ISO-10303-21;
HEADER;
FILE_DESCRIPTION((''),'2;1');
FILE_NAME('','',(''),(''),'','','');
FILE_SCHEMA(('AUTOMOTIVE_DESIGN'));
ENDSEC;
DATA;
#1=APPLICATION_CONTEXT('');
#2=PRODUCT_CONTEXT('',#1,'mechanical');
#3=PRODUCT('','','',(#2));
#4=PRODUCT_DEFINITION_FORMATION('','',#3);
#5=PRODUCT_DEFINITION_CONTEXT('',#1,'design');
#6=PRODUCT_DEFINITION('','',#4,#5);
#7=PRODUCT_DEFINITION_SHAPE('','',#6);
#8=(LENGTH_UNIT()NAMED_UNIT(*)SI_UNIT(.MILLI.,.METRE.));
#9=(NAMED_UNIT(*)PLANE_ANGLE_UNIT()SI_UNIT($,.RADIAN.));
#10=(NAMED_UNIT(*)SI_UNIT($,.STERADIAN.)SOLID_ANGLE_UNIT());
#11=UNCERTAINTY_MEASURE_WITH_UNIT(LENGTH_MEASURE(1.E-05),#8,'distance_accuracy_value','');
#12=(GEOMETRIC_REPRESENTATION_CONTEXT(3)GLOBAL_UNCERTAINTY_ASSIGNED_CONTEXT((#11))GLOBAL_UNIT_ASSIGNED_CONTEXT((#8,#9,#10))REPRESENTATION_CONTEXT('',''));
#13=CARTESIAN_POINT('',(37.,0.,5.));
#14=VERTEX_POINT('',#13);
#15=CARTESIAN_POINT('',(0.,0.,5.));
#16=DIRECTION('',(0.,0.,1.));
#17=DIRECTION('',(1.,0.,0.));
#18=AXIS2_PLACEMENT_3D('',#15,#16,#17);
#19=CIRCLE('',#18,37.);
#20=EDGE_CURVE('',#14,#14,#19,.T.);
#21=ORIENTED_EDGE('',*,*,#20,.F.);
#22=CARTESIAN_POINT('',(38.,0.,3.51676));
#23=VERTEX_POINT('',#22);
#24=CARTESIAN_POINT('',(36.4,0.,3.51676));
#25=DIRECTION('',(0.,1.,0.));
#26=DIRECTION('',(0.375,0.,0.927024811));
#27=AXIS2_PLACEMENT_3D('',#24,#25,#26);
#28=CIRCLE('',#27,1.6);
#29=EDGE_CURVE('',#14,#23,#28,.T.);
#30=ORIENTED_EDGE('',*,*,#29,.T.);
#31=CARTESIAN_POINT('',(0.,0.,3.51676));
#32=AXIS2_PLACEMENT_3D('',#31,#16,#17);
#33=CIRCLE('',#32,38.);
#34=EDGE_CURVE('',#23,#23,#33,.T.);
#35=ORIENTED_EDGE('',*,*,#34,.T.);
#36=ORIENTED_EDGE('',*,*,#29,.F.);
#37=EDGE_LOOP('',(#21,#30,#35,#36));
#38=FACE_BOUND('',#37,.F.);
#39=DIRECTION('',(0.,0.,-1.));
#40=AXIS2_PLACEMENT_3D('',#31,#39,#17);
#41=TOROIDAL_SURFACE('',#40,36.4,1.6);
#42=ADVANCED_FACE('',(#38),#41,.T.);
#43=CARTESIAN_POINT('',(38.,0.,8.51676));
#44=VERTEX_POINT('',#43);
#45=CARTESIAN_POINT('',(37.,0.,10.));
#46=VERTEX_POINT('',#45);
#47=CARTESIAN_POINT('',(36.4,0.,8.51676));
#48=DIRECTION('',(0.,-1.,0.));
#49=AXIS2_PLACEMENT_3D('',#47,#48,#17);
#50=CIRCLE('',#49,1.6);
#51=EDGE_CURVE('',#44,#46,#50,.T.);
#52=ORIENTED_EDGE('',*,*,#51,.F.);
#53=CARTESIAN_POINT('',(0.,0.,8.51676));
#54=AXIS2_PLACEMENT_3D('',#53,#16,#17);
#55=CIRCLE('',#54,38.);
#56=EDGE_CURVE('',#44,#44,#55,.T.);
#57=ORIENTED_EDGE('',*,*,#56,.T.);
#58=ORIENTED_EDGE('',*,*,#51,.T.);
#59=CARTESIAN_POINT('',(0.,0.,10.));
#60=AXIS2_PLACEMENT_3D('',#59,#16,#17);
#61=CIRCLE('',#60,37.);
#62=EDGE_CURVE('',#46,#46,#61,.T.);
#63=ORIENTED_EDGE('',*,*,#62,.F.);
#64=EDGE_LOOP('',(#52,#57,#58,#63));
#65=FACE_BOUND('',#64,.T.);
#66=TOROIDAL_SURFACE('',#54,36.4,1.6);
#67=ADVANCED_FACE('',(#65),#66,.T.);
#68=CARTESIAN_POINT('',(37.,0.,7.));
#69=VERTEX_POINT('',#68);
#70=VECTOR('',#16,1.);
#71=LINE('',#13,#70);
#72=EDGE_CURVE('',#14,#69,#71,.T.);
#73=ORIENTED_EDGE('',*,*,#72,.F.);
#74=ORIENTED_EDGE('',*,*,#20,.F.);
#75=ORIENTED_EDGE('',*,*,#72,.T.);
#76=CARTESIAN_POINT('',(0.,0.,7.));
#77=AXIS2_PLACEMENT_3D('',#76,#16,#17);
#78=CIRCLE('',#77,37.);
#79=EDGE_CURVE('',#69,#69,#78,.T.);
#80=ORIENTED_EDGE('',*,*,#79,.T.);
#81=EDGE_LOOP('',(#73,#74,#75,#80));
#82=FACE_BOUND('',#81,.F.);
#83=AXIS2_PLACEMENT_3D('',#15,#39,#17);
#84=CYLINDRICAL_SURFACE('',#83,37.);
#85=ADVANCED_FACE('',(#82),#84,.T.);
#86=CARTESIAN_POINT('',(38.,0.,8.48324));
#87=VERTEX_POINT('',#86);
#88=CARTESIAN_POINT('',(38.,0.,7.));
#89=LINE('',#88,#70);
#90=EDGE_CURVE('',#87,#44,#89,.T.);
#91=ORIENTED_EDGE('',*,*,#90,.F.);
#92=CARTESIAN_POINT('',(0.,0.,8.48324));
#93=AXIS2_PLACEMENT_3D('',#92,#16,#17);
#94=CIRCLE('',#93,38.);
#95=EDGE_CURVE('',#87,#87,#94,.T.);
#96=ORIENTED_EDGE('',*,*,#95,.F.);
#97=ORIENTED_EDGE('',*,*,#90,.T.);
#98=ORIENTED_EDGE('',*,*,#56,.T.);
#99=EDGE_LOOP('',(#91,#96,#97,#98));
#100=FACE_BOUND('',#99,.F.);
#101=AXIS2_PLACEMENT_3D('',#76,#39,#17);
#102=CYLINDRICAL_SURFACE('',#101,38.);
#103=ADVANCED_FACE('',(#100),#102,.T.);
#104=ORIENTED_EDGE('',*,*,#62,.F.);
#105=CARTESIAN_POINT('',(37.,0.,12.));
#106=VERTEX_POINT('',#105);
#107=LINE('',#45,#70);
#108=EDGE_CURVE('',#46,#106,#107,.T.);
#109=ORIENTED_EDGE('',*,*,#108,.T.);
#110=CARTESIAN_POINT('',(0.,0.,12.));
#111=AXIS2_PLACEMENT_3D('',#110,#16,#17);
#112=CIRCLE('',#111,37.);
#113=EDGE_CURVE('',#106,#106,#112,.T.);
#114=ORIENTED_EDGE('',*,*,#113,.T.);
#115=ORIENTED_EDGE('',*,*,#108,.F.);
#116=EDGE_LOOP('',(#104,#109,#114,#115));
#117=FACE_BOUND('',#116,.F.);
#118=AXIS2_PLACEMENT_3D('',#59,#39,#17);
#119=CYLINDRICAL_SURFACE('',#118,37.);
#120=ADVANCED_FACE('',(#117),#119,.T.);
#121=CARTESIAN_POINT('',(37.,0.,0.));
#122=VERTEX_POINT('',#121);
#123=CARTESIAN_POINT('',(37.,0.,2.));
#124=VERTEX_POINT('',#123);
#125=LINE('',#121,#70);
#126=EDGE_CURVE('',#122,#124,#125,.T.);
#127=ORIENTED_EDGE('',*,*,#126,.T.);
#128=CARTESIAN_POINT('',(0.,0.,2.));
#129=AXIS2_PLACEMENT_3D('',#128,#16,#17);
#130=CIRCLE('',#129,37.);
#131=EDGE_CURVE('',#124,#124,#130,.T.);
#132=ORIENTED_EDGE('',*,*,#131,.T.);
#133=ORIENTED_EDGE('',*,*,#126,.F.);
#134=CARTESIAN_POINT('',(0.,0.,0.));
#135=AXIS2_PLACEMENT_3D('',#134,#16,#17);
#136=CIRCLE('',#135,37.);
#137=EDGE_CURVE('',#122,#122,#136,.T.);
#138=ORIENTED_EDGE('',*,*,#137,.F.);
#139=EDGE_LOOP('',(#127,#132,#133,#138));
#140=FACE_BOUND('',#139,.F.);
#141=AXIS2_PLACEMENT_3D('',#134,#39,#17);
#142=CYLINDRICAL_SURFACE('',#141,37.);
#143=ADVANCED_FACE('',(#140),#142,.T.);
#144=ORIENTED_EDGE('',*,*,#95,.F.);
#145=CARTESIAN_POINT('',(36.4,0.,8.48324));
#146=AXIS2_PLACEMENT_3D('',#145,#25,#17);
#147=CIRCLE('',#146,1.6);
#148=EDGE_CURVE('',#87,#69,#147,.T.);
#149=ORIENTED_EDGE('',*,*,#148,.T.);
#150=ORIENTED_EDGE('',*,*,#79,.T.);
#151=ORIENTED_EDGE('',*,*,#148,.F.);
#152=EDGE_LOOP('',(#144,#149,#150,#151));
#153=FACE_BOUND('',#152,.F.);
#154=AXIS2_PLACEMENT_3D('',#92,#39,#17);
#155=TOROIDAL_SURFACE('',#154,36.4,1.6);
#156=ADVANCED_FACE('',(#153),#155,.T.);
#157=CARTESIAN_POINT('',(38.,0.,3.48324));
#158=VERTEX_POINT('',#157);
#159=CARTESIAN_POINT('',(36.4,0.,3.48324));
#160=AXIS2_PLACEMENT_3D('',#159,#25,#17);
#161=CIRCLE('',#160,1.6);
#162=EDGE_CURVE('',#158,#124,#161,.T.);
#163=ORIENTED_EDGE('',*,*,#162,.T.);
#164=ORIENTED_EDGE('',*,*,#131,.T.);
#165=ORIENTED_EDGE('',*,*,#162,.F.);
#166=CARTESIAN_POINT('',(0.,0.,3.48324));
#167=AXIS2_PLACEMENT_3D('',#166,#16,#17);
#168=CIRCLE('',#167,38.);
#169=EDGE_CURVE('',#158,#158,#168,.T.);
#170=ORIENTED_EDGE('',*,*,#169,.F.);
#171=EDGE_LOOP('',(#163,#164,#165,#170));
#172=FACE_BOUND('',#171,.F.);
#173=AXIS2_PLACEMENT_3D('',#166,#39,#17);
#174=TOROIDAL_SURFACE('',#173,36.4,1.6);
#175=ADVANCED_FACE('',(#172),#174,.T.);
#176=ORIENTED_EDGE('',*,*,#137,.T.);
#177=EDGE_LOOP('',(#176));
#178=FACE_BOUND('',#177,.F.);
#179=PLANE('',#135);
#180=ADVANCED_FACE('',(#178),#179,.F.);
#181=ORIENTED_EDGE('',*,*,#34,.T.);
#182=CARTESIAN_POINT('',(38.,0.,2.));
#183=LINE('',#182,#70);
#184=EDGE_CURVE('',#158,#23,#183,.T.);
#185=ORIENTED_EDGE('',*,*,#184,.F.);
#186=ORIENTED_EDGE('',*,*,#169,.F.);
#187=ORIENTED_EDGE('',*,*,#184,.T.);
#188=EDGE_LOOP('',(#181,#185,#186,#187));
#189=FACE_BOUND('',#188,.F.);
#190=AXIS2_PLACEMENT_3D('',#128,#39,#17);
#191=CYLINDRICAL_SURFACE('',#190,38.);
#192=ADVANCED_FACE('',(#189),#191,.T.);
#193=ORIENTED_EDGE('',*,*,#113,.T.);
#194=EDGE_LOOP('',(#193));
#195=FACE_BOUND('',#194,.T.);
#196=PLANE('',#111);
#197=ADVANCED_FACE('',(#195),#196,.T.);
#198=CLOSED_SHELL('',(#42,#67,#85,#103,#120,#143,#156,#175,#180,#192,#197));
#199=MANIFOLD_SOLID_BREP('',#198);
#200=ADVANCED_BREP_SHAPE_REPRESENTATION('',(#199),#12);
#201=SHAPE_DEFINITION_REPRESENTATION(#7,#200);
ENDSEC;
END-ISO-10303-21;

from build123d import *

# Parameters (mm, degrees)
F0_R     = 37
F1_DEPTH = 2
F2_R     = 38
F3_DEPTH = 3
F4_R     = 37
F5_DEPTH = 2
F6_R     = 38
F7_DEPTH = 3
F8_R     = 37
F9_DEPTH = 2


# Not quite as in the source:
# - a fillet or chamfer that OpenCascade refuses, or shapes differently, is made with other operations: its cross-section is extruded or revolved along the edge and cut away or added


with BuildPart() as f1:
    # F0 (on Top) → F1 (new body)
    with BuildSketch(Plane.XY):
        Circle(F0_R)
    extrude(amount=F1_DEPTH)

    # F2 (on face) → F3 (join)
    with BuildSketch(Plane.XY.offset(2)):
        Circle(F2_R)
    extrude(amount=F3_DEPTH)

    # F4 (on face) → F5 (join)
    with BuildSketch(Plane.XY.offset(5)):
        Circle(F4_R)
    extrude(amount=F5_DEPTH)

    # F6 (on face) → F7 (join)
    with BuildSketch(Plane.XY.offset(7)):
        Circle(F6_R)
    extrude(amount=F7_DEPTH)

    # F8 (on face) → F9 (join)
    with BuildSketch(Plane.XY.offset(10)):
        Circle(F8_R)
    extrude(amount=F9_DEPTH)

    # F10: fillet of radius 1.6 on 4 edges, made by hand

    # F10_s1 → F10_t2 (revolve, cut)
    with BuildSketch(Plane.XZ):
        with BuildLine():
            ThreePointArc((38, 8.4832396974), (37.7266499161, 7.5888125064), (37, 7))
            Line((37, 7), (38, 7))
            Line((38, 7), (38, 8.4832396974))
        make_face()
    revolve(axis=Axis((0, 0, 7), (0, 0, 1)), mode=Mode.SUBTRACT)

    # F10_s3 → F10_t4 (revolve, cut)
    with BuildSketch(Plane.XZ):
        with BuildLine():
            ThreePointArc((38, 3.4832396974), (37.7266499161, 2.5888125064), (37, 2))
            Line((37, 2), (38, 2))
            Line((38, 2), (38, 3.4832396974))
        make_face()
    revolve(axis=Axis((0, 0, 2), (0, 0, 1)), mode=Mode.SUBTRACT)

    # F10_s5 → F10_t6 (revolve, cut)
    with BuildSketch(Plane.XZ):
        with BuildLine():
            ThreePointArc((38, 8.5167603026), (37.7266499161, 9.4111874936), (37, 10))
            Line((37, 10), (38, 10))
            Line((38, 10), (38, 8.5167603026))
        make_face()
    revolve(axis=Axis((0, 0, 10), (0, 0, 1)), mode=Mode.SUBTRACT)

    # F10_s7 → F10_t8 (revolve, cut)
    with BuildSketch(Plane.XZ):
        with BuildLine():
            ThreePointArc((37, 5), (37.7266499161, 4.4111874936), (38, 3.5167603026))
            Line((38, 3.5167603026), (38, 5))
            Line((38, 5), (37, 5))
        make_face()
    revolve(axis=Axis((0, 0, 5), (0, 0, 1)), mode=Mode.SUBTRACT)


solid = f1.part
